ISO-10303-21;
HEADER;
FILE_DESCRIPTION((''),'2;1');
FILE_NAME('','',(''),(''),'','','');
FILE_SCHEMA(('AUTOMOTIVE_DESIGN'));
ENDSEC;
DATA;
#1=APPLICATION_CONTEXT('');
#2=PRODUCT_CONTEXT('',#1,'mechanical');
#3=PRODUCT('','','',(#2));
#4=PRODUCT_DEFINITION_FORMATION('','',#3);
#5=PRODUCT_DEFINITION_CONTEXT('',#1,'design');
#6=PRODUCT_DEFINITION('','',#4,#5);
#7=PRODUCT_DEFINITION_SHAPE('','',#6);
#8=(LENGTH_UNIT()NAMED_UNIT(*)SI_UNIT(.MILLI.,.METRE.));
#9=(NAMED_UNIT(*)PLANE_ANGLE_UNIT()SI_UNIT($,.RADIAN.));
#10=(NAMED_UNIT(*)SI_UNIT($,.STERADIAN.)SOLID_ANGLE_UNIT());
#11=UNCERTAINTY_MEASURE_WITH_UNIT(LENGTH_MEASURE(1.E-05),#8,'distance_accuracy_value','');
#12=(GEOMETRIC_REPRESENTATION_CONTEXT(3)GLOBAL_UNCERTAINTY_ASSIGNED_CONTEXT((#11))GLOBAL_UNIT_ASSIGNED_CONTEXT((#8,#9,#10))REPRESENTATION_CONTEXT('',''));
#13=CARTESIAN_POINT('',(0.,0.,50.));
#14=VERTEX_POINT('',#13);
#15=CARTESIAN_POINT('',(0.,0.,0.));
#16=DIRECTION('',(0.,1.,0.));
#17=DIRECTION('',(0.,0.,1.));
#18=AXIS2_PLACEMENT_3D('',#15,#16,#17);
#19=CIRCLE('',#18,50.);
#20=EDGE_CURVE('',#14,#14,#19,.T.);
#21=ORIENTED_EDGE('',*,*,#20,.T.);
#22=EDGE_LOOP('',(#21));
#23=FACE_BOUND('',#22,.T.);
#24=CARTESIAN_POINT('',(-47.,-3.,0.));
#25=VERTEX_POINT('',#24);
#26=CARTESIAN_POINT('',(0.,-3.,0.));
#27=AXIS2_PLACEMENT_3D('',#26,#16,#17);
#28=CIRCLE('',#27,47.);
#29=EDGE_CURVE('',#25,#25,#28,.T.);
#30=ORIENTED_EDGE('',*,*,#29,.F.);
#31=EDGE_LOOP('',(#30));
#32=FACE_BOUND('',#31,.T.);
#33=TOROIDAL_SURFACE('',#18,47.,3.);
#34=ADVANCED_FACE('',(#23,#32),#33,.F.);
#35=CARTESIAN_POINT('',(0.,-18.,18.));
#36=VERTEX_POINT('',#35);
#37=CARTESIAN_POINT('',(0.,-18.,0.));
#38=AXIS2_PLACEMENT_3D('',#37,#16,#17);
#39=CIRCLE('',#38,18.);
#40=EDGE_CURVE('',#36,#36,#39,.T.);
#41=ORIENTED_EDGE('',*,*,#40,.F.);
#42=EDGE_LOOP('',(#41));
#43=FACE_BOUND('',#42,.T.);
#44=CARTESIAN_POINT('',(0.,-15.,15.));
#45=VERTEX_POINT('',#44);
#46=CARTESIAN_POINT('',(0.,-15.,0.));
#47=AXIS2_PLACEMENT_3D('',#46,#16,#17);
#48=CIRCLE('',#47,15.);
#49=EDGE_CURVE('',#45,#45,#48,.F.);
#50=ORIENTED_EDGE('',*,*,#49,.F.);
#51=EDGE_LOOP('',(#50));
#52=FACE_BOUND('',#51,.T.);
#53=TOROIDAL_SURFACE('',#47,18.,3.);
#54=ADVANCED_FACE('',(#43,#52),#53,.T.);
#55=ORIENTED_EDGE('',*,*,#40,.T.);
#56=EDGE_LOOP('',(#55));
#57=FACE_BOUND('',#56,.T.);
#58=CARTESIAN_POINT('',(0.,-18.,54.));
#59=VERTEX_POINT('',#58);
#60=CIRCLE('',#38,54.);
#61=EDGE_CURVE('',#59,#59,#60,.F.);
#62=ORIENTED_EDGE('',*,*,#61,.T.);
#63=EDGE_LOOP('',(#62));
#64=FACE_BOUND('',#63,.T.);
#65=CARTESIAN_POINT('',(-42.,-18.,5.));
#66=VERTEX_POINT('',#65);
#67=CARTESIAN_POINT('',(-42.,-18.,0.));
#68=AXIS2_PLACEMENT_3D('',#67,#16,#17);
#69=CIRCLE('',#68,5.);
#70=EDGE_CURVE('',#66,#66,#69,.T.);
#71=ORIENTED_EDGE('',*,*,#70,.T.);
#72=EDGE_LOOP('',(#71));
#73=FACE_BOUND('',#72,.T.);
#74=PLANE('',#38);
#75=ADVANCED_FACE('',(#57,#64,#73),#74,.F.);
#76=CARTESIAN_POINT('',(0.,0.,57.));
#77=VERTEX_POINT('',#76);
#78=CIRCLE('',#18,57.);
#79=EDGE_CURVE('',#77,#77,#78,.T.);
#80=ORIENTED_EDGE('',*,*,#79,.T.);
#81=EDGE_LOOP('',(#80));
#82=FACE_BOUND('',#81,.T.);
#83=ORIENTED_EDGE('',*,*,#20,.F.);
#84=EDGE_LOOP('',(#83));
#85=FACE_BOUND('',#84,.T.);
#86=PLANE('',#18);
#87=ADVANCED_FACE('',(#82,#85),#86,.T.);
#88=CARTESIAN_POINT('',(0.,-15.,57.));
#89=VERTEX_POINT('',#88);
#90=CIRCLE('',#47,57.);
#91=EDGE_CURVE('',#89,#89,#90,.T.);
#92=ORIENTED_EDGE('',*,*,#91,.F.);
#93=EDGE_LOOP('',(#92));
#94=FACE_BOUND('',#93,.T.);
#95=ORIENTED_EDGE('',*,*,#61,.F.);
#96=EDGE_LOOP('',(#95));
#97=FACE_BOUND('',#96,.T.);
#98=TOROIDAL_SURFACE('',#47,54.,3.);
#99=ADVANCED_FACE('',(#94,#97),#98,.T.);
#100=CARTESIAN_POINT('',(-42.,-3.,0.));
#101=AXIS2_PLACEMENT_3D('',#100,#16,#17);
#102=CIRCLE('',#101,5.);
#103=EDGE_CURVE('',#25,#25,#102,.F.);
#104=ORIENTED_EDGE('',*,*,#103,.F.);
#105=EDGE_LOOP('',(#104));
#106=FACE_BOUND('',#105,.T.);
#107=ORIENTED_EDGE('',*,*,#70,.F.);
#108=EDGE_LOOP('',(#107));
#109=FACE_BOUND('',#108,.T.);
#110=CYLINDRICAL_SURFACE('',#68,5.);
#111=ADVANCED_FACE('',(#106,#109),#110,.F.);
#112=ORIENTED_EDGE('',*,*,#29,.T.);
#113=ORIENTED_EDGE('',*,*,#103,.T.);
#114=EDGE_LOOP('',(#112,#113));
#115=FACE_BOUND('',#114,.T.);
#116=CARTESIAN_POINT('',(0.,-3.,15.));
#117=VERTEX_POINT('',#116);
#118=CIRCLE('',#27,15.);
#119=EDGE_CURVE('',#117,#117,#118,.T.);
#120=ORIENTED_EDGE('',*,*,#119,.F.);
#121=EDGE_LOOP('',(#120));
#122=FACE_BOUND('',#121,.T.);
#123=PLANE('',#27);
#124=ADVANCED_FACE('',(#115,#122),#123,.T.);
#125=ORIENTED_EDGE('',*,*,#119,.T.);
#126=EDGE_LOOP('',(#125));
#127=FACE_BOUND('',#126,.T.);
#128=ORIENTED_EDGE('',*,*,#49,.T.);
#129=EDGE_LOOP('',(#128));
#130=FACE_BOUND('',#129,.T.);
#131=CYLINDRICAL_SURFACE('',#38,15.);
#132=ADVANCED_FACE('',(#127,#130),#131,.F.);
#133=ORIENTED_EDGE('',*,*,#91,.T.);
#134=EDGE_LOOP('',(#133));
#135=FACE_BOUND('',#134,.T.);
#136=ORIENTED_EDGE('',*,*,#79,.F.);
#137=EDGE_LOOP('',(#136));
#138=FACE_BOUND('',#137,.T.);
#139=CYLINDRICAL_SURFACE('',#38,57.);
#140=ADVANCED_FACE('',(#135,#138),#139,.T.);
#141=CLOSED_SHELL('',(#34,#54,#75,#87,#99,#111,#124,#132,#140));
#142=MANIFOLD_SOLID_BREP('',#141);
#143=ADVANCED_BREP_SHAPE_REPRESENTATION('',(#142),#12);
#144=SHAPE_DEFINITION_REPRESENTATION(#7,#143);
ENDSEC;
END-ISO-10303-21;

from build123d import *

# Parameters (mm, degrees)
SKETCH1_R           = 57
SKETCH1_R_2         = 15
SKETCH1_R_3         = 5
BOSS_EXTRUDE1_DEPTH = 18
FILLET1_R           = 3
SKETCH2_R           = 50
SKETCH2_R_2         = 15
CUT_EXTRUDE1_DEPTH  = 3
FILLET2_R           = 3


with BuildPart() as part:
    # Sketch1 → Boss-Extrude1 (new body)
    with BuildSketch(Plane(origin=(0, 0, 0), x_dir=(1, 0, 0), z_dir=(0, 1, 0))):
        with Locations(Location((0, 0, 0), (0, 0, 270))):
            Circle(SKETCH1_R)
        with Locations(Location((0, 0, 0), (0, 0, 270))):
            Circle(SKETCH1_R_2, mode=Mode.SUBTRACT)
        with Locations(Location((-42, 0, 0), (0, 0, 270))):
            Circle(SKETCH1_R_3, mode=Mode.SUBTRACT)
    extrude(amount=-BOSS_EXTRUDE1_DEPTH)

    # Fillet1
    fillet1_edges = [part.edges().sort_by_distance(p)[0] for p in [
        (0, -18, -57),
        (0, -18, -15),
    ]]
    fillet(fillet1_edges, radius=FILLET1_R)

    # Sketch2 → Cut-Extrude1 (cut)
    with BuildSketch(Plane(origin=(0, 0, 0), x_dir=(1, 0, 0), z_dir=(0, 1, 0))):
        with Locations(Location((0, 0, 0), (0, 0, 270))):
            Circle(SKETCH2_R)
        with Locations(Location((0, 0, 0), (0, 0, 270))):
            Circle(SKETCH2_R_2, mode=Mode.SUBTRACT)
    extrude(amount=-CUT_EXTRUDE1_DEPTH, mode=Mode.SUBTRACT)

    # Fillet2
    fillet2_edges = [part.edges().sort_by_distance(p)[0] for p in [
        (0, -3, -50),
    ]]
    fillet(fillet2_edges, radius=FILLET2_R - 0.0001)  # a hair under: the kernel refuses the full size


solid = part.part
